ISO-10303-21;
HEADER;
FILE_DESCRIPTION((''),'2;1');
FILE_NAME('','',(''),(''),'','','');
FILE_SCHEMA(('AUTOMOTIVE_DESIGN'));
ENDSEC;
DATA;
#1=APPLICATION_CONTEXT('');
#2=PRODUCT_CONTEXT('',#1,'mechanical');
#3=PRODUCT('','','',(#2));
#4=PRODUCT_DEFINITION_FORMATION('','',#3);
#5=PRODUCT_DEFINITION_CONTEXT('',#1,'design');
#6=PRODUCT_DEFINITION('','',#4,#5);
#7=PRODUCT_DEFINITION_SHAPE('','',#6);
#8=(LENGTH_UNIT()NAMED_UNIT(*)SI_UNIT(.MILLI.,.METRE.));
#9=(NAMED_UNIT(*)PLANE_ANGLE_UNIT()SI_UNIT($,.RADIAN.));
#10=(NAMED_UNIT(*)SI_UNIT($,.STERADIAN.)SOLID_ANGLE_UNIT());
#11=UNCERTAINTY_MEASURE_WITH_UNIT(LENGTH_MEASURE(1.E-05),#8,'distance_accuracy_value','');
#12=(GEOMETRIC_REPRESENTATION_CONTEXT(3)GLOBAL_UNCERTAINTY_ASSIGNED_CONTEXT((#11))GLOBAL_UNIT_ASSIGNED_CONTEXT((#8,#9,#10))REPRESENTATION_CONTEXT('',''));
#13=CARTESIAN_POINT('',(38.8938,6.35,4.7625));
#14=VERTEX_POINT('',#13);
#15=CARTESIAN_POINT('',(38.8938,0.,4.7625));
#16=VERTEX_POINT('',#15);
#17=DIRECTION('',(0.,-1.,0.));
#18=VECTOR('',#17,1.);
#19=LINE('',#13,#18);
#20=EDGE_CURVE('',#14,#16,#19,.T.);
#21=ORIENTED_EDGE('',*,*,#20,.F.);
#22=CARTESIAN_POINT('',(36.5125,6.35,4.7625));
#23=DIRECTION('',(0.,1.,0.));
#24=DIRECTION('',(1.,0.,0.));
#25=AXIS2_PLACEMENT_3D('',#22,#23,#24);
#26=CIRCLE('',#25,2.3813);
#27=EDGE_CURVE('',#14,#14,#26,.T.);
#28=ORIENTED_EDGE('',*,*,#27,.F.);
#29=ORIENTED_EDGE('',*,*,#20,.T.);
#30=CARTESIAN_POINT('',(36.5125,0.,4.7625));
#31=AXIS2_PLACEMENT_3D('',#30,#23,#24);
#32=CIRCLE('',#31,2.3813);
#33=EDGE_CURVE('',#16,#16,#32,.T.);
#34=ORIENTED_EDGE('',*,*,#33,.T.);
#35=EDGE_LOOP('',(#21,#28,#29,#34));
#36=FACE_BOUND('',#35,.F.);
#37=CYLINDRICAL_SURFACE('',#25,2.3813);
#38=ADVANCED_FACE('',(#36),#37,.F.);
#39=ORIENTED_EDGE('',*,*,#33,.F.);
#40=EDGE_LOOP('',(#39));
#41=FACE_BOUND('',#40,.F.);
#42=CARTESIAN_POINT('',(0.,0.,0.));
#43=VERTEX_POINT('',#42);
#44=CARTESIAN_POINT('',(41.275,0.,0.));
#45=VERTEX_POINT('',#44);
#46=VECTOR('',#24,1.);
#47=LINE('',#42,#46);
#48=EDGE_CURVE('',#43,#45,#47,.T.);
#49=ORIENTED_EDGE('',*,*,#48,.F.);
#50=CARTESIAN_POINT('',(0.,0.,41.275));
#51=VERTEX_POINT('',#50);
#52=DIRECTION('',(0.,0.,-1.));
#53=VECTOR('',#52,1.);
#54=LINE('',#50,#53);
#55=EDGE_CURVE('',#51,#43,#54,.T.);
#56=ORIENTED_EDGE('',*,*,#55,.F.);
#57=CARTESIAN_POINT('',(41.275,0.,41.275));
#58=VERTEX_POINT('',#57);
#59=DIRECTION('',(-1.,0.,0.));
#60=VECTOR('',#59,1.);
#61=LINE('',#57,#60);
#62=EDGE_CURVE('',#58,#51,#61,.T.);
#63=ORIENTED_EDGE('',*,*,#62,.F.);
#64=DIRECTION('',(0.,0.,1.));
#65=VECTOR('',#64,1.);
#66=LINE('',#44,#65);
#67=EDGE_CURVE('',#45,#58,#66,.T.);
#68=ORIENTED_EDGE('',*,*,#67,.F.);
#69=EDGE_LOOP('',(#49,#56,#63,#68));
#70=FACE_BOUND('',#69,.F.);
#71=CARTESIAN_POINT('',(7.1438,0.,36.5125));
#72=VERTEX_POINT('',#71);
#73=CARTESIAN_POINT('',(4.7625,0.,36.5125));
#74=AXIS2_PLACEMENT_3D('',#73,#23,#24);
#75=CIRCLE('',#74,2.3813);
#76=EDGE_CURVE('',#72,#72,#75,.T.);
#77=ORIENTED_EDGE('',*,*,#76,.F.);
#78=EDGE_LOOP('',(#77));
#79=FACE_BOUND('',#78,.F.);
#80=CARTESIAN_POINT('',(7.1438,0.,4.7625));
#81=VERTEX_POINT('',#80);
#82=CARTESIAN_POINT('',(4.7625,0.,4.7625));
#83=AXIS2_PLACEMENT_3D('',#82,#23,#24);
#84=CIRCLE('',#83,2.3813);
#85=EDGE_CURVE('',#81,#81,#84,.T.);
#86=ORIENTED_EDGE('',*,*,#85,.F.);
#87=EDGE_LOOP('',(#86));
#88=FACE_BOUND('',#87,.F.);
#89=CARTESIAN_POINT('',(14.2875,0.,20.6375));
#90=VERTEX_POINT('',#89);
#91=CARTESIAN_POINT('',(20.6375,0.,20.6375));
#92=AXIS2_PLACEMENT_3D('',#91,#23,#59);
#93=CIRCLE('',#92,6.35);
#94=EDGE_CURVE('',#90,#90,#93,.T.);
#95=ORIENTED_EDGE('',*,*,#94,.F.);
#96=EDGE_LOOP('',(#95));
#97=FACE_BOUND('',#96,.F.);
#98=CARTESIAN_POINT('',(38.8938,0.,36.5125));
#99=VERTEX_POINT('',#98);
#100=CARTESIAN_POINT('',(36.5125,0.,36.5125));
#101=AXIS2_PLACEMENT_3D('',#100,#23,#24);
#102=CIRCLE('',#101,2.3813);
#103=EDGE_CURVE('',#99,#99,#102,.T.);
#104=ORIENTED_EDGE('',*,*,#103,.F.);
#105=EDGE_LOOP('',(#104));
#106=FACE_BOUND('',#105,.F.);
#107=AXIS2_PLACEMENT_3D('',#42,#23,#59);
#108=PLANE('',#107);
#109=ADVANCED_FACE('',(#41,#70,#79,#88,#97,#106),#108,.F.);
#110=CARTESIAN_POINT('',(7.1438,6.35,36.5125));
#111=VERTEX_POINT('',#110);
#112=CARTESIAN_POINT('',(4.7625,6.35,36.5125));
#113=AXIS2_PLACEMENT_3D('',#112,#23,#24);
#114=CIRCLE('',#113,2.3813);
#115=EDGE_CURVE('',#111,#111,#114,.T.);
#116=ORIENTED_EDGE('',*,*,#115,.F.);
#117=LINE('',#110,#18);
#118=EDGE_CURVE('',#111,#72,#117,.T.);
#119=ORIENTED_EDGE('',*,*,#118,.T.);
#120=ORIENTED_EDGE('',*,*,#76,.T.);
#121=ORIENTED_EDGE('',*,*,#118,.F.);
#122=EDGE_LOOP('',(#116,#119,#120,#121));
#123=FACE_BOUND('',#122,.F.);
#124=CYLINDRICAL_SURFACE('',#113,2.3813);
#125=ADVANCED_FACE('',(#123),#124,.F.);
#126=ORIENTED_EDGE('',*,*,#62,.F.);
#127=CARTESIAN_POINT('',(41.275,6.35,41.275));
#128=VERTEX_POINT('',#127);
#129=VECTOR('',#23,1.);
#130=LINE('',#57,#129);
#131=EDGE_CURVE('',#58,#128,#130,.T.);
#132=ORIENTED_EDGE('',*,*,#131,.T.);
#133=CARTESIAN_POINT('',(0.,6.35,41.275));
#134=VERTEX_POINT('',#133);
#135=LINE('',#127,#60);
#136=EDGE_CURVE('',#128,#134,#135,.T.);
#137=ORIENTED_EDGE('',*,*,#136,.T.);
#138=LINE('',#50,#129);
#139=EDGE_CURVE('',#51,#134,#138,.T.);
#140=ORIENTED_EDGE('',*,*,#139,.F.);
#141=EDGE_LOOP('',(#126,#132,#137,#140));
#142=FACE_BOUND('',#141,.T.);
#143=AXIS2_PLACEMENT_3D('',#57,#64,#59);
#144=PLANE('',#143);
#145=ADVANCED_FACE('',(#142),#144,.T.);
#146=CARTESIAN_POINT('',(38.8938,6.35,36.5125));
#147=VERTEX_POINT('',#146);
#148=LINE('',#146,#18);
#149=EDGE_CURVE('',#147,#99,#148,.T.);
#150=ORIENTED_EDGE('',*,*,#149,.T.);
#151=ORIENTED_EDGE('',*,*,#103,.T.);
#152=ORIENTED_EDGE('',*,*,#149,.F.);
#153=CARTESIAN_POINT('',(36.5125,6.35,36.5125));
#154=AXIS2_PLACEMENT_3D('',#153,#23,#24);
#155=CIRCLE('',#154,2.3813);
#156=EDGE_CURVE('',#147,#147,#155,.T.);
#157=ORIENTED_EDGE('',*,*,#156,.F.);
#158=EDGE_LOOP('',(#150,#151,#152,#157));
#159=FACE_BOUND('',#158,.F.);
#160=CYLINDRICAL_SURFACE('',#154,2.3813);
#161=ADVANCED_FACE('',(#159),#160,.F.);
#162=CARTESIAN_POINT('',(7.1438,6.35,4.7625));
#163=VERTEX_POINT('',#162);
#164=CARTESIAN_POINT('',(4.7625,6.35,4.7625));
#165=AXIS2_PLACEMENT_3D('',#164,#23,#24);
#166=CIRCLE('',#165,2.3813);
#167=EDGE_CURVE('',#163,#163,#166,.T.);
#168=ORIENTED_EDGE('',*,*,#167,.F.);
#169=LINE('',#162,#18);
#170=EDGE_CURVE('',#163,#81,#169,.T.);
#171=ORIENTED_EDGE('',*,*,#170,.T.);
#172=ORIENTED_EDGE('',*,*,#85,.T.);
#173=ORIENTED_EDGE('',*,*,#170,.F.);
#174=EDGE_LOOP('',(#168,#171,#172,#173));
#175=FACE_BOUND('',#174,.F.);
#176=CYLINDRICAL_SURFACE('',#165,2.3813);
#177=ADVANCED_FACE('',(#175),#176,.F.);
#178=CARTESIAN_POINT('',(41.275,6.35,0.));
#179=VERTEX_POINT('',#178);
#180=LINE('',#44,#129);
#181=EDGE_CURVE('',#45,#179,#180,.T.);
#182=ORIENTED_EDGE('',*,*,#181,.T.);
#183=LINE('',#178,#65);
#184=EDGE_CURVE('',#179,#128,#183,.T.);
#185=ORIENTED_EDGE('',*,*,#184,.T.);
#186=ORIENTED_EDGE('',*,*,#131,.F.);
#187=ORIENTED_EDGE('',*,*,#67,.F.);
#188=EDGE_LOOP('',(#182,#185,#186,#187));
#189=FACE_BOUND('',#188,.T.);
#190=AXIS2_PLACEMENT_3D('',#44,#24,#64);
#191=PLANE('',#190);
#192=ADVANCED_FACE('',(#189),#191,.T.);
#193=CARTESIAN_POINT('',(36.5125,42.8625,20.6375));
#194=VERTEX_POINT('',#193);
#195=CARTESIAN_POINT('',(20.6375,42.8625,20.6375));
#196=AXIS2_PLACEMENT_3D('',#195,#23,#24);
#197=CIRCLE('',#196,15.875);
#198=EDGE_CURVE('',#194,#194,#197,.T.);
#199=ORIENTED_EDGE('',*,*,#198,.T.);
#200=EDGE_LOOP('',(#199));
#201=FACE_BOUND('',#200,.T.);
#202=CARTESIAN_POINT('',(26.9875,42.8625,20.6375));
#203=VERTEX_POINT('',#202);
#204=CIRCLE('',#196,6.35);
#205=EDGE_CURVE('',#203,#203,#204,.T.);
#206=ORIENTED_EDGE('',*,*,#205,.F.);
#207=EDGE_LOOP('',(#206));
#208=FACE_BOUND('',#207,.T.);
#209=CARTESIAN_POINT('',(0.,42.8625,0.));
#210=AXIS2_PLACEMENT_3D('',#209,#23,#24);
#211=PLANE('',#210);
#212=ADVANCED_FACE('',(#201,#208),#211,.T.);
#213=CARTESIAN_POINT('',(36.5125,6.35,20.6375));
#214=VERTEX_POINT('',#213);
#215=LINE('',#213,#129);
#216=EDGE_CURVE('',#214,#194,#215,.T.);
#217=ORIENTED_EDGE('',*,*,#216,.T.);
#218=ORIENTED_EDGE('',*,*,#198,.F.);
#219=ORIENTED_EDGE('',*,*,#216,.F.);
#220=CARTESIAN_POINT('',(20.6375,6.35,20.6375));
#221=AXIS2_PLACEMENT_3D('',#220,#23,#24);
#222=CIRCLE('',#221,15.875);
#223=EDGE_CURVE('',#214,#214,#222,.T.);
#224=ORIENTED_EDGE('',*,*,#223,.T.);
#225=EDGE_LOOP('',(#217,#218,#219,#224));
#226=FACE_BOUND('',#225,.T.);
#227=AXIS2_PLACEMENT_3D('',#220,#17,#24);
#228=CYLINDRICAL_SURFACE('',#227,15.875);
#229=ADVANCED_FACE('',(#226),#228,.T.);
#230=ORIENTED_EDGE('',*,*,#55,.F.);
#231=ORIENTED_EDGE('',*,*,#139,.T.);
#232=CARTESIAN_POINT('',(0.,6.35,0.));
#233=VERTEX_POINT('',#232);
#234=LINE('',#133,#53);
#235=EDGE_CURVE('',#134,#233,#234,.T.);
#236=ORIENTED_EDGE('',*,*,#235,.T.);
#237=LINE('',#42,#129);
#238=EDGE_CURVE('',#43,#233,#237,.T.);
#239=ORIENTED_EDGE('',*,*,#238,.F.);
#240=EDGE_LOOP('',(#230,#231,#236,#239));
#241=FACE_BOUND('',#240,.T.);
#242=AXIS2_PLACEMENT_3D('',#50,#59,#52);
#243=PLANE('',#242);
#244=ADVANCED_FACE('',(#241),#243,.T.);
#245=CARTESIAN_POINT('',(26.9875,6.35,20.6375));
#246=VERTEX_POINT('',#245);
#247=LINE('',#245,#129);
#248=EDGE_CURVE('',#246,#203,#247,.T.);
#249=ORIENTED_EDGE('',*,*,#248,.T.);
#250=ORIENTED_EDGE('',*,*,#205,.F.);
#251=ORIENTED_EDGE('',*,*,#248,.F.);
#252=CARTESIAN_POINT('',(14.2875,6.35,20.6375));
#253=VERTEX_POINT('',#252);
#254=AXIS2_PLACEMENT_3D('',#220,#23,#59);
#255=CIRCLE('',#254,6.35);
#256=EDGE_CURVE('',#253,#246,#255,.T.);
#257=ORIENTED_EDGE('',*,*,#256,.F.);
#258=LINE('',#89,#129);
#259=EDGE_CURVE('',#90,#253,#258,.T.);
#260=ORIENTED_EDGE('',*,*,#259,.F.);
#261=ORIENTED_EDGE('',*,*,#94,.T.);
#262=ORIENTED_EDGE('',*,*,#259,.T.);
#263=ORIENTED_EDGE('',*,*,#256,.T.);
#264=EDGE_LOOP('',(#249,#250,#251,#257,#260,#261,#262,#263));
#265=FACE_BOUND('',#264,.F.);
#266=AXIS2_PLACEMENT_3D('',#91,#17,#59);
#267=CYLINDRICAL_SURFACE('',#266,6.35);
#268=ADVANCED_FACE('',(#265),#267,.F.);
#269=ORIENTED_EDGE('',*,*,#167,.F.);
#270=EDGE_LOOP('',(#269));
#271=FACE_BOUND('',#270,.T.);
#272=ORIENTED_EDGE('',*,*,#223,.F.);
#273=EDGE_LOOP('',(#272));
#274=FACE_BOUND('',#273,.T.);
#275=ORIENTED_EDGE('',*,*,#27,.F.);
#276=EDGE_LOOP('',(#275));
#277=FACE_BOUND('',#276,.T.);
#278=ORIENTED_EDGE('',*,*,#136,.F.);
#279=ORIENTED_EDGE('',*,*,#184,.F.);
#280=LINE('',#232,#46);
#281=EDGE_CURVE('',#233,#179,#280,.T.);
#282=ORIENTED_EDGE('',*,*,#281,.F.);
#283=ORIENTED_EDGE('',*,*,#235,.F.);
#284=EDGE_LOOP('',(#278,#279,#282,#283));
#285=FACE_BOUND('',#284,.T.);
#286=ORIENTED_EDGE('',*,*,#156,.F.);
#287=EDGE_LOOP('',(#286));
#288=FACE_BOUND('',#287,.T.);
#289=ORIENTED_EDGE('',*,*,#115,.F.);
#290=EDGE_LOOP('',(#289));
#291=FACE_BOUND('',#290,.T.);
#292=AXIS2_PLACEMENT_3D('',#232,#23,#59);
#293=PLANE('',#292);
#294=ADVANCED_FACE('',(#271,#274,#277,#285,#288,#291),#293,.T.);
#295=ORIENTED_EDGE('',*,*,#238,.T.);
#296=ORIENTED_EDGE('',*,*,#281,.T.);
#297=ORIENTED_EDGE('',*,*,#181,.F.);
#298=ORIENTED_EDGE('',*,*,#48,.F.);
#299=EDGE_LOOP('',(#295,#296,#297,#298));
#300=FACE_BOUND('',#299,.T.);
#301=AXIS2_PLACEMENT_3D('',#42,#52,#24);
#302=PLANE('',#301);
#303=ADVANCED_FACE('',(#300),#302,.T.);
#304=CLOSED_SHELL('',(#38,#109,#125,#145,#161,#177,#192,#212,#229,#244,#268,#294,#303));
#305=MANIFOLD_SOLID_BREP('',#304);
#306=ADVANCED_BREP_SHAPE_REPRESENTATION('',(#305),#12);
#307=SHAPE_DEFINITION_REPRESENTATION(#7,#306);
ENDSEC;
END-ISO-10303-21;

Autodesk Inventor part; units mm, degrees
ref_plane "YZ Plane" through (0, 0, 0) normal (1, 0, 0) x (0, 1, 0)
ref_plane "XZ Plane" through (0, 0, 0) normal (0, 1, 0) x (-1, 0, 0)
ref_plane "XY Plane" through (0, 0, 0) normal (0, 0, 1) x (1, 0, 0)
sketch "Sketch1" plane through (0, 0, 0) normal (0, 1, 0) x (-1, 0, 0)
  line L0 (0, 0) -> (-41.275, 0)
  line L1 (-41.275, 0) -> (-41.275, 41.275)
  line L2 (-41.275, 41.275) -> (0, 41.275)
  line L3 (0, 41.275) -> (0, 0)
  circle A0 centre (-20.6375, 20.6375) radius 6.35
  line L4 (0, 41.275) -> (-41.275, 0) construction
  line L5 (-41.275, 41.275) -> (0, 0) construction
  dimension "d0" = 41.275
  dimension "d1" = 41.275
  dimension "d15" = 12.7
extrude "Extrusion1" add sketch "Sketch1" along normal blind 6.35
sketch "Sketch2" plane through (0, 6.35, 0) normal (0, 1, 0) x (1, 0, 0)
  circle A0 centre (20.6375, -20.6375) radius 6.35
  circle A1 centre (20.6375, -20.6375) radius 15.875
  dimension "d4" = 12.7
  dimension "d5" = 31.75
extrude "Extrusion2" add sketch "Sketch2" along normal blind 36.5125
sketch "Sketch3" plane through (0, 6.35, 0) normal (0, 1, 0) x (1, 0, 0)
  line L0 (0, -41.275) -> (41.275, -41.275) projected
  line L1 (41.275, -41.275) -> (41.275, 0) projected
  circle A0 centre (20.6375, -20.6375) radius 15.875 projected
  circle A1 centre (4.7625, -4.7625) radius 2.3813
  circle A2 centre (36.5125, -4.7625) radius 2.3813
  circle A3 centre (36.5125, -36.5125) radius 2.3813
  circle A4 centre (4.7625, -36.5125) radius 2.3813
  line L2 (4.7625, -36.5125) -> (4.7625, -4.7625) construction
  line L3 (4.7625, -4.7625) -> (36.5125, -4.7625) construction
  line L4 (36.5125, -4.7625) -> (36.5125, -36.5125) construction
  line L5 (36.5125, -36.5125) -> (4.7625, -36.5125) construction
  dimension "d8" = 4.7625
  dimension "d10" = 31.75
  dimension "d11" = 15.875
  dimension "d12" = 15.875
extrude "Extrusion3" cut sketch "Sketch3" against normal blind 36.5125 contours A1 | A2 | A3 | A4
properties part number "Flange Mount Linear Bearing (McMaster Part #64825K11)" material "Steel"
